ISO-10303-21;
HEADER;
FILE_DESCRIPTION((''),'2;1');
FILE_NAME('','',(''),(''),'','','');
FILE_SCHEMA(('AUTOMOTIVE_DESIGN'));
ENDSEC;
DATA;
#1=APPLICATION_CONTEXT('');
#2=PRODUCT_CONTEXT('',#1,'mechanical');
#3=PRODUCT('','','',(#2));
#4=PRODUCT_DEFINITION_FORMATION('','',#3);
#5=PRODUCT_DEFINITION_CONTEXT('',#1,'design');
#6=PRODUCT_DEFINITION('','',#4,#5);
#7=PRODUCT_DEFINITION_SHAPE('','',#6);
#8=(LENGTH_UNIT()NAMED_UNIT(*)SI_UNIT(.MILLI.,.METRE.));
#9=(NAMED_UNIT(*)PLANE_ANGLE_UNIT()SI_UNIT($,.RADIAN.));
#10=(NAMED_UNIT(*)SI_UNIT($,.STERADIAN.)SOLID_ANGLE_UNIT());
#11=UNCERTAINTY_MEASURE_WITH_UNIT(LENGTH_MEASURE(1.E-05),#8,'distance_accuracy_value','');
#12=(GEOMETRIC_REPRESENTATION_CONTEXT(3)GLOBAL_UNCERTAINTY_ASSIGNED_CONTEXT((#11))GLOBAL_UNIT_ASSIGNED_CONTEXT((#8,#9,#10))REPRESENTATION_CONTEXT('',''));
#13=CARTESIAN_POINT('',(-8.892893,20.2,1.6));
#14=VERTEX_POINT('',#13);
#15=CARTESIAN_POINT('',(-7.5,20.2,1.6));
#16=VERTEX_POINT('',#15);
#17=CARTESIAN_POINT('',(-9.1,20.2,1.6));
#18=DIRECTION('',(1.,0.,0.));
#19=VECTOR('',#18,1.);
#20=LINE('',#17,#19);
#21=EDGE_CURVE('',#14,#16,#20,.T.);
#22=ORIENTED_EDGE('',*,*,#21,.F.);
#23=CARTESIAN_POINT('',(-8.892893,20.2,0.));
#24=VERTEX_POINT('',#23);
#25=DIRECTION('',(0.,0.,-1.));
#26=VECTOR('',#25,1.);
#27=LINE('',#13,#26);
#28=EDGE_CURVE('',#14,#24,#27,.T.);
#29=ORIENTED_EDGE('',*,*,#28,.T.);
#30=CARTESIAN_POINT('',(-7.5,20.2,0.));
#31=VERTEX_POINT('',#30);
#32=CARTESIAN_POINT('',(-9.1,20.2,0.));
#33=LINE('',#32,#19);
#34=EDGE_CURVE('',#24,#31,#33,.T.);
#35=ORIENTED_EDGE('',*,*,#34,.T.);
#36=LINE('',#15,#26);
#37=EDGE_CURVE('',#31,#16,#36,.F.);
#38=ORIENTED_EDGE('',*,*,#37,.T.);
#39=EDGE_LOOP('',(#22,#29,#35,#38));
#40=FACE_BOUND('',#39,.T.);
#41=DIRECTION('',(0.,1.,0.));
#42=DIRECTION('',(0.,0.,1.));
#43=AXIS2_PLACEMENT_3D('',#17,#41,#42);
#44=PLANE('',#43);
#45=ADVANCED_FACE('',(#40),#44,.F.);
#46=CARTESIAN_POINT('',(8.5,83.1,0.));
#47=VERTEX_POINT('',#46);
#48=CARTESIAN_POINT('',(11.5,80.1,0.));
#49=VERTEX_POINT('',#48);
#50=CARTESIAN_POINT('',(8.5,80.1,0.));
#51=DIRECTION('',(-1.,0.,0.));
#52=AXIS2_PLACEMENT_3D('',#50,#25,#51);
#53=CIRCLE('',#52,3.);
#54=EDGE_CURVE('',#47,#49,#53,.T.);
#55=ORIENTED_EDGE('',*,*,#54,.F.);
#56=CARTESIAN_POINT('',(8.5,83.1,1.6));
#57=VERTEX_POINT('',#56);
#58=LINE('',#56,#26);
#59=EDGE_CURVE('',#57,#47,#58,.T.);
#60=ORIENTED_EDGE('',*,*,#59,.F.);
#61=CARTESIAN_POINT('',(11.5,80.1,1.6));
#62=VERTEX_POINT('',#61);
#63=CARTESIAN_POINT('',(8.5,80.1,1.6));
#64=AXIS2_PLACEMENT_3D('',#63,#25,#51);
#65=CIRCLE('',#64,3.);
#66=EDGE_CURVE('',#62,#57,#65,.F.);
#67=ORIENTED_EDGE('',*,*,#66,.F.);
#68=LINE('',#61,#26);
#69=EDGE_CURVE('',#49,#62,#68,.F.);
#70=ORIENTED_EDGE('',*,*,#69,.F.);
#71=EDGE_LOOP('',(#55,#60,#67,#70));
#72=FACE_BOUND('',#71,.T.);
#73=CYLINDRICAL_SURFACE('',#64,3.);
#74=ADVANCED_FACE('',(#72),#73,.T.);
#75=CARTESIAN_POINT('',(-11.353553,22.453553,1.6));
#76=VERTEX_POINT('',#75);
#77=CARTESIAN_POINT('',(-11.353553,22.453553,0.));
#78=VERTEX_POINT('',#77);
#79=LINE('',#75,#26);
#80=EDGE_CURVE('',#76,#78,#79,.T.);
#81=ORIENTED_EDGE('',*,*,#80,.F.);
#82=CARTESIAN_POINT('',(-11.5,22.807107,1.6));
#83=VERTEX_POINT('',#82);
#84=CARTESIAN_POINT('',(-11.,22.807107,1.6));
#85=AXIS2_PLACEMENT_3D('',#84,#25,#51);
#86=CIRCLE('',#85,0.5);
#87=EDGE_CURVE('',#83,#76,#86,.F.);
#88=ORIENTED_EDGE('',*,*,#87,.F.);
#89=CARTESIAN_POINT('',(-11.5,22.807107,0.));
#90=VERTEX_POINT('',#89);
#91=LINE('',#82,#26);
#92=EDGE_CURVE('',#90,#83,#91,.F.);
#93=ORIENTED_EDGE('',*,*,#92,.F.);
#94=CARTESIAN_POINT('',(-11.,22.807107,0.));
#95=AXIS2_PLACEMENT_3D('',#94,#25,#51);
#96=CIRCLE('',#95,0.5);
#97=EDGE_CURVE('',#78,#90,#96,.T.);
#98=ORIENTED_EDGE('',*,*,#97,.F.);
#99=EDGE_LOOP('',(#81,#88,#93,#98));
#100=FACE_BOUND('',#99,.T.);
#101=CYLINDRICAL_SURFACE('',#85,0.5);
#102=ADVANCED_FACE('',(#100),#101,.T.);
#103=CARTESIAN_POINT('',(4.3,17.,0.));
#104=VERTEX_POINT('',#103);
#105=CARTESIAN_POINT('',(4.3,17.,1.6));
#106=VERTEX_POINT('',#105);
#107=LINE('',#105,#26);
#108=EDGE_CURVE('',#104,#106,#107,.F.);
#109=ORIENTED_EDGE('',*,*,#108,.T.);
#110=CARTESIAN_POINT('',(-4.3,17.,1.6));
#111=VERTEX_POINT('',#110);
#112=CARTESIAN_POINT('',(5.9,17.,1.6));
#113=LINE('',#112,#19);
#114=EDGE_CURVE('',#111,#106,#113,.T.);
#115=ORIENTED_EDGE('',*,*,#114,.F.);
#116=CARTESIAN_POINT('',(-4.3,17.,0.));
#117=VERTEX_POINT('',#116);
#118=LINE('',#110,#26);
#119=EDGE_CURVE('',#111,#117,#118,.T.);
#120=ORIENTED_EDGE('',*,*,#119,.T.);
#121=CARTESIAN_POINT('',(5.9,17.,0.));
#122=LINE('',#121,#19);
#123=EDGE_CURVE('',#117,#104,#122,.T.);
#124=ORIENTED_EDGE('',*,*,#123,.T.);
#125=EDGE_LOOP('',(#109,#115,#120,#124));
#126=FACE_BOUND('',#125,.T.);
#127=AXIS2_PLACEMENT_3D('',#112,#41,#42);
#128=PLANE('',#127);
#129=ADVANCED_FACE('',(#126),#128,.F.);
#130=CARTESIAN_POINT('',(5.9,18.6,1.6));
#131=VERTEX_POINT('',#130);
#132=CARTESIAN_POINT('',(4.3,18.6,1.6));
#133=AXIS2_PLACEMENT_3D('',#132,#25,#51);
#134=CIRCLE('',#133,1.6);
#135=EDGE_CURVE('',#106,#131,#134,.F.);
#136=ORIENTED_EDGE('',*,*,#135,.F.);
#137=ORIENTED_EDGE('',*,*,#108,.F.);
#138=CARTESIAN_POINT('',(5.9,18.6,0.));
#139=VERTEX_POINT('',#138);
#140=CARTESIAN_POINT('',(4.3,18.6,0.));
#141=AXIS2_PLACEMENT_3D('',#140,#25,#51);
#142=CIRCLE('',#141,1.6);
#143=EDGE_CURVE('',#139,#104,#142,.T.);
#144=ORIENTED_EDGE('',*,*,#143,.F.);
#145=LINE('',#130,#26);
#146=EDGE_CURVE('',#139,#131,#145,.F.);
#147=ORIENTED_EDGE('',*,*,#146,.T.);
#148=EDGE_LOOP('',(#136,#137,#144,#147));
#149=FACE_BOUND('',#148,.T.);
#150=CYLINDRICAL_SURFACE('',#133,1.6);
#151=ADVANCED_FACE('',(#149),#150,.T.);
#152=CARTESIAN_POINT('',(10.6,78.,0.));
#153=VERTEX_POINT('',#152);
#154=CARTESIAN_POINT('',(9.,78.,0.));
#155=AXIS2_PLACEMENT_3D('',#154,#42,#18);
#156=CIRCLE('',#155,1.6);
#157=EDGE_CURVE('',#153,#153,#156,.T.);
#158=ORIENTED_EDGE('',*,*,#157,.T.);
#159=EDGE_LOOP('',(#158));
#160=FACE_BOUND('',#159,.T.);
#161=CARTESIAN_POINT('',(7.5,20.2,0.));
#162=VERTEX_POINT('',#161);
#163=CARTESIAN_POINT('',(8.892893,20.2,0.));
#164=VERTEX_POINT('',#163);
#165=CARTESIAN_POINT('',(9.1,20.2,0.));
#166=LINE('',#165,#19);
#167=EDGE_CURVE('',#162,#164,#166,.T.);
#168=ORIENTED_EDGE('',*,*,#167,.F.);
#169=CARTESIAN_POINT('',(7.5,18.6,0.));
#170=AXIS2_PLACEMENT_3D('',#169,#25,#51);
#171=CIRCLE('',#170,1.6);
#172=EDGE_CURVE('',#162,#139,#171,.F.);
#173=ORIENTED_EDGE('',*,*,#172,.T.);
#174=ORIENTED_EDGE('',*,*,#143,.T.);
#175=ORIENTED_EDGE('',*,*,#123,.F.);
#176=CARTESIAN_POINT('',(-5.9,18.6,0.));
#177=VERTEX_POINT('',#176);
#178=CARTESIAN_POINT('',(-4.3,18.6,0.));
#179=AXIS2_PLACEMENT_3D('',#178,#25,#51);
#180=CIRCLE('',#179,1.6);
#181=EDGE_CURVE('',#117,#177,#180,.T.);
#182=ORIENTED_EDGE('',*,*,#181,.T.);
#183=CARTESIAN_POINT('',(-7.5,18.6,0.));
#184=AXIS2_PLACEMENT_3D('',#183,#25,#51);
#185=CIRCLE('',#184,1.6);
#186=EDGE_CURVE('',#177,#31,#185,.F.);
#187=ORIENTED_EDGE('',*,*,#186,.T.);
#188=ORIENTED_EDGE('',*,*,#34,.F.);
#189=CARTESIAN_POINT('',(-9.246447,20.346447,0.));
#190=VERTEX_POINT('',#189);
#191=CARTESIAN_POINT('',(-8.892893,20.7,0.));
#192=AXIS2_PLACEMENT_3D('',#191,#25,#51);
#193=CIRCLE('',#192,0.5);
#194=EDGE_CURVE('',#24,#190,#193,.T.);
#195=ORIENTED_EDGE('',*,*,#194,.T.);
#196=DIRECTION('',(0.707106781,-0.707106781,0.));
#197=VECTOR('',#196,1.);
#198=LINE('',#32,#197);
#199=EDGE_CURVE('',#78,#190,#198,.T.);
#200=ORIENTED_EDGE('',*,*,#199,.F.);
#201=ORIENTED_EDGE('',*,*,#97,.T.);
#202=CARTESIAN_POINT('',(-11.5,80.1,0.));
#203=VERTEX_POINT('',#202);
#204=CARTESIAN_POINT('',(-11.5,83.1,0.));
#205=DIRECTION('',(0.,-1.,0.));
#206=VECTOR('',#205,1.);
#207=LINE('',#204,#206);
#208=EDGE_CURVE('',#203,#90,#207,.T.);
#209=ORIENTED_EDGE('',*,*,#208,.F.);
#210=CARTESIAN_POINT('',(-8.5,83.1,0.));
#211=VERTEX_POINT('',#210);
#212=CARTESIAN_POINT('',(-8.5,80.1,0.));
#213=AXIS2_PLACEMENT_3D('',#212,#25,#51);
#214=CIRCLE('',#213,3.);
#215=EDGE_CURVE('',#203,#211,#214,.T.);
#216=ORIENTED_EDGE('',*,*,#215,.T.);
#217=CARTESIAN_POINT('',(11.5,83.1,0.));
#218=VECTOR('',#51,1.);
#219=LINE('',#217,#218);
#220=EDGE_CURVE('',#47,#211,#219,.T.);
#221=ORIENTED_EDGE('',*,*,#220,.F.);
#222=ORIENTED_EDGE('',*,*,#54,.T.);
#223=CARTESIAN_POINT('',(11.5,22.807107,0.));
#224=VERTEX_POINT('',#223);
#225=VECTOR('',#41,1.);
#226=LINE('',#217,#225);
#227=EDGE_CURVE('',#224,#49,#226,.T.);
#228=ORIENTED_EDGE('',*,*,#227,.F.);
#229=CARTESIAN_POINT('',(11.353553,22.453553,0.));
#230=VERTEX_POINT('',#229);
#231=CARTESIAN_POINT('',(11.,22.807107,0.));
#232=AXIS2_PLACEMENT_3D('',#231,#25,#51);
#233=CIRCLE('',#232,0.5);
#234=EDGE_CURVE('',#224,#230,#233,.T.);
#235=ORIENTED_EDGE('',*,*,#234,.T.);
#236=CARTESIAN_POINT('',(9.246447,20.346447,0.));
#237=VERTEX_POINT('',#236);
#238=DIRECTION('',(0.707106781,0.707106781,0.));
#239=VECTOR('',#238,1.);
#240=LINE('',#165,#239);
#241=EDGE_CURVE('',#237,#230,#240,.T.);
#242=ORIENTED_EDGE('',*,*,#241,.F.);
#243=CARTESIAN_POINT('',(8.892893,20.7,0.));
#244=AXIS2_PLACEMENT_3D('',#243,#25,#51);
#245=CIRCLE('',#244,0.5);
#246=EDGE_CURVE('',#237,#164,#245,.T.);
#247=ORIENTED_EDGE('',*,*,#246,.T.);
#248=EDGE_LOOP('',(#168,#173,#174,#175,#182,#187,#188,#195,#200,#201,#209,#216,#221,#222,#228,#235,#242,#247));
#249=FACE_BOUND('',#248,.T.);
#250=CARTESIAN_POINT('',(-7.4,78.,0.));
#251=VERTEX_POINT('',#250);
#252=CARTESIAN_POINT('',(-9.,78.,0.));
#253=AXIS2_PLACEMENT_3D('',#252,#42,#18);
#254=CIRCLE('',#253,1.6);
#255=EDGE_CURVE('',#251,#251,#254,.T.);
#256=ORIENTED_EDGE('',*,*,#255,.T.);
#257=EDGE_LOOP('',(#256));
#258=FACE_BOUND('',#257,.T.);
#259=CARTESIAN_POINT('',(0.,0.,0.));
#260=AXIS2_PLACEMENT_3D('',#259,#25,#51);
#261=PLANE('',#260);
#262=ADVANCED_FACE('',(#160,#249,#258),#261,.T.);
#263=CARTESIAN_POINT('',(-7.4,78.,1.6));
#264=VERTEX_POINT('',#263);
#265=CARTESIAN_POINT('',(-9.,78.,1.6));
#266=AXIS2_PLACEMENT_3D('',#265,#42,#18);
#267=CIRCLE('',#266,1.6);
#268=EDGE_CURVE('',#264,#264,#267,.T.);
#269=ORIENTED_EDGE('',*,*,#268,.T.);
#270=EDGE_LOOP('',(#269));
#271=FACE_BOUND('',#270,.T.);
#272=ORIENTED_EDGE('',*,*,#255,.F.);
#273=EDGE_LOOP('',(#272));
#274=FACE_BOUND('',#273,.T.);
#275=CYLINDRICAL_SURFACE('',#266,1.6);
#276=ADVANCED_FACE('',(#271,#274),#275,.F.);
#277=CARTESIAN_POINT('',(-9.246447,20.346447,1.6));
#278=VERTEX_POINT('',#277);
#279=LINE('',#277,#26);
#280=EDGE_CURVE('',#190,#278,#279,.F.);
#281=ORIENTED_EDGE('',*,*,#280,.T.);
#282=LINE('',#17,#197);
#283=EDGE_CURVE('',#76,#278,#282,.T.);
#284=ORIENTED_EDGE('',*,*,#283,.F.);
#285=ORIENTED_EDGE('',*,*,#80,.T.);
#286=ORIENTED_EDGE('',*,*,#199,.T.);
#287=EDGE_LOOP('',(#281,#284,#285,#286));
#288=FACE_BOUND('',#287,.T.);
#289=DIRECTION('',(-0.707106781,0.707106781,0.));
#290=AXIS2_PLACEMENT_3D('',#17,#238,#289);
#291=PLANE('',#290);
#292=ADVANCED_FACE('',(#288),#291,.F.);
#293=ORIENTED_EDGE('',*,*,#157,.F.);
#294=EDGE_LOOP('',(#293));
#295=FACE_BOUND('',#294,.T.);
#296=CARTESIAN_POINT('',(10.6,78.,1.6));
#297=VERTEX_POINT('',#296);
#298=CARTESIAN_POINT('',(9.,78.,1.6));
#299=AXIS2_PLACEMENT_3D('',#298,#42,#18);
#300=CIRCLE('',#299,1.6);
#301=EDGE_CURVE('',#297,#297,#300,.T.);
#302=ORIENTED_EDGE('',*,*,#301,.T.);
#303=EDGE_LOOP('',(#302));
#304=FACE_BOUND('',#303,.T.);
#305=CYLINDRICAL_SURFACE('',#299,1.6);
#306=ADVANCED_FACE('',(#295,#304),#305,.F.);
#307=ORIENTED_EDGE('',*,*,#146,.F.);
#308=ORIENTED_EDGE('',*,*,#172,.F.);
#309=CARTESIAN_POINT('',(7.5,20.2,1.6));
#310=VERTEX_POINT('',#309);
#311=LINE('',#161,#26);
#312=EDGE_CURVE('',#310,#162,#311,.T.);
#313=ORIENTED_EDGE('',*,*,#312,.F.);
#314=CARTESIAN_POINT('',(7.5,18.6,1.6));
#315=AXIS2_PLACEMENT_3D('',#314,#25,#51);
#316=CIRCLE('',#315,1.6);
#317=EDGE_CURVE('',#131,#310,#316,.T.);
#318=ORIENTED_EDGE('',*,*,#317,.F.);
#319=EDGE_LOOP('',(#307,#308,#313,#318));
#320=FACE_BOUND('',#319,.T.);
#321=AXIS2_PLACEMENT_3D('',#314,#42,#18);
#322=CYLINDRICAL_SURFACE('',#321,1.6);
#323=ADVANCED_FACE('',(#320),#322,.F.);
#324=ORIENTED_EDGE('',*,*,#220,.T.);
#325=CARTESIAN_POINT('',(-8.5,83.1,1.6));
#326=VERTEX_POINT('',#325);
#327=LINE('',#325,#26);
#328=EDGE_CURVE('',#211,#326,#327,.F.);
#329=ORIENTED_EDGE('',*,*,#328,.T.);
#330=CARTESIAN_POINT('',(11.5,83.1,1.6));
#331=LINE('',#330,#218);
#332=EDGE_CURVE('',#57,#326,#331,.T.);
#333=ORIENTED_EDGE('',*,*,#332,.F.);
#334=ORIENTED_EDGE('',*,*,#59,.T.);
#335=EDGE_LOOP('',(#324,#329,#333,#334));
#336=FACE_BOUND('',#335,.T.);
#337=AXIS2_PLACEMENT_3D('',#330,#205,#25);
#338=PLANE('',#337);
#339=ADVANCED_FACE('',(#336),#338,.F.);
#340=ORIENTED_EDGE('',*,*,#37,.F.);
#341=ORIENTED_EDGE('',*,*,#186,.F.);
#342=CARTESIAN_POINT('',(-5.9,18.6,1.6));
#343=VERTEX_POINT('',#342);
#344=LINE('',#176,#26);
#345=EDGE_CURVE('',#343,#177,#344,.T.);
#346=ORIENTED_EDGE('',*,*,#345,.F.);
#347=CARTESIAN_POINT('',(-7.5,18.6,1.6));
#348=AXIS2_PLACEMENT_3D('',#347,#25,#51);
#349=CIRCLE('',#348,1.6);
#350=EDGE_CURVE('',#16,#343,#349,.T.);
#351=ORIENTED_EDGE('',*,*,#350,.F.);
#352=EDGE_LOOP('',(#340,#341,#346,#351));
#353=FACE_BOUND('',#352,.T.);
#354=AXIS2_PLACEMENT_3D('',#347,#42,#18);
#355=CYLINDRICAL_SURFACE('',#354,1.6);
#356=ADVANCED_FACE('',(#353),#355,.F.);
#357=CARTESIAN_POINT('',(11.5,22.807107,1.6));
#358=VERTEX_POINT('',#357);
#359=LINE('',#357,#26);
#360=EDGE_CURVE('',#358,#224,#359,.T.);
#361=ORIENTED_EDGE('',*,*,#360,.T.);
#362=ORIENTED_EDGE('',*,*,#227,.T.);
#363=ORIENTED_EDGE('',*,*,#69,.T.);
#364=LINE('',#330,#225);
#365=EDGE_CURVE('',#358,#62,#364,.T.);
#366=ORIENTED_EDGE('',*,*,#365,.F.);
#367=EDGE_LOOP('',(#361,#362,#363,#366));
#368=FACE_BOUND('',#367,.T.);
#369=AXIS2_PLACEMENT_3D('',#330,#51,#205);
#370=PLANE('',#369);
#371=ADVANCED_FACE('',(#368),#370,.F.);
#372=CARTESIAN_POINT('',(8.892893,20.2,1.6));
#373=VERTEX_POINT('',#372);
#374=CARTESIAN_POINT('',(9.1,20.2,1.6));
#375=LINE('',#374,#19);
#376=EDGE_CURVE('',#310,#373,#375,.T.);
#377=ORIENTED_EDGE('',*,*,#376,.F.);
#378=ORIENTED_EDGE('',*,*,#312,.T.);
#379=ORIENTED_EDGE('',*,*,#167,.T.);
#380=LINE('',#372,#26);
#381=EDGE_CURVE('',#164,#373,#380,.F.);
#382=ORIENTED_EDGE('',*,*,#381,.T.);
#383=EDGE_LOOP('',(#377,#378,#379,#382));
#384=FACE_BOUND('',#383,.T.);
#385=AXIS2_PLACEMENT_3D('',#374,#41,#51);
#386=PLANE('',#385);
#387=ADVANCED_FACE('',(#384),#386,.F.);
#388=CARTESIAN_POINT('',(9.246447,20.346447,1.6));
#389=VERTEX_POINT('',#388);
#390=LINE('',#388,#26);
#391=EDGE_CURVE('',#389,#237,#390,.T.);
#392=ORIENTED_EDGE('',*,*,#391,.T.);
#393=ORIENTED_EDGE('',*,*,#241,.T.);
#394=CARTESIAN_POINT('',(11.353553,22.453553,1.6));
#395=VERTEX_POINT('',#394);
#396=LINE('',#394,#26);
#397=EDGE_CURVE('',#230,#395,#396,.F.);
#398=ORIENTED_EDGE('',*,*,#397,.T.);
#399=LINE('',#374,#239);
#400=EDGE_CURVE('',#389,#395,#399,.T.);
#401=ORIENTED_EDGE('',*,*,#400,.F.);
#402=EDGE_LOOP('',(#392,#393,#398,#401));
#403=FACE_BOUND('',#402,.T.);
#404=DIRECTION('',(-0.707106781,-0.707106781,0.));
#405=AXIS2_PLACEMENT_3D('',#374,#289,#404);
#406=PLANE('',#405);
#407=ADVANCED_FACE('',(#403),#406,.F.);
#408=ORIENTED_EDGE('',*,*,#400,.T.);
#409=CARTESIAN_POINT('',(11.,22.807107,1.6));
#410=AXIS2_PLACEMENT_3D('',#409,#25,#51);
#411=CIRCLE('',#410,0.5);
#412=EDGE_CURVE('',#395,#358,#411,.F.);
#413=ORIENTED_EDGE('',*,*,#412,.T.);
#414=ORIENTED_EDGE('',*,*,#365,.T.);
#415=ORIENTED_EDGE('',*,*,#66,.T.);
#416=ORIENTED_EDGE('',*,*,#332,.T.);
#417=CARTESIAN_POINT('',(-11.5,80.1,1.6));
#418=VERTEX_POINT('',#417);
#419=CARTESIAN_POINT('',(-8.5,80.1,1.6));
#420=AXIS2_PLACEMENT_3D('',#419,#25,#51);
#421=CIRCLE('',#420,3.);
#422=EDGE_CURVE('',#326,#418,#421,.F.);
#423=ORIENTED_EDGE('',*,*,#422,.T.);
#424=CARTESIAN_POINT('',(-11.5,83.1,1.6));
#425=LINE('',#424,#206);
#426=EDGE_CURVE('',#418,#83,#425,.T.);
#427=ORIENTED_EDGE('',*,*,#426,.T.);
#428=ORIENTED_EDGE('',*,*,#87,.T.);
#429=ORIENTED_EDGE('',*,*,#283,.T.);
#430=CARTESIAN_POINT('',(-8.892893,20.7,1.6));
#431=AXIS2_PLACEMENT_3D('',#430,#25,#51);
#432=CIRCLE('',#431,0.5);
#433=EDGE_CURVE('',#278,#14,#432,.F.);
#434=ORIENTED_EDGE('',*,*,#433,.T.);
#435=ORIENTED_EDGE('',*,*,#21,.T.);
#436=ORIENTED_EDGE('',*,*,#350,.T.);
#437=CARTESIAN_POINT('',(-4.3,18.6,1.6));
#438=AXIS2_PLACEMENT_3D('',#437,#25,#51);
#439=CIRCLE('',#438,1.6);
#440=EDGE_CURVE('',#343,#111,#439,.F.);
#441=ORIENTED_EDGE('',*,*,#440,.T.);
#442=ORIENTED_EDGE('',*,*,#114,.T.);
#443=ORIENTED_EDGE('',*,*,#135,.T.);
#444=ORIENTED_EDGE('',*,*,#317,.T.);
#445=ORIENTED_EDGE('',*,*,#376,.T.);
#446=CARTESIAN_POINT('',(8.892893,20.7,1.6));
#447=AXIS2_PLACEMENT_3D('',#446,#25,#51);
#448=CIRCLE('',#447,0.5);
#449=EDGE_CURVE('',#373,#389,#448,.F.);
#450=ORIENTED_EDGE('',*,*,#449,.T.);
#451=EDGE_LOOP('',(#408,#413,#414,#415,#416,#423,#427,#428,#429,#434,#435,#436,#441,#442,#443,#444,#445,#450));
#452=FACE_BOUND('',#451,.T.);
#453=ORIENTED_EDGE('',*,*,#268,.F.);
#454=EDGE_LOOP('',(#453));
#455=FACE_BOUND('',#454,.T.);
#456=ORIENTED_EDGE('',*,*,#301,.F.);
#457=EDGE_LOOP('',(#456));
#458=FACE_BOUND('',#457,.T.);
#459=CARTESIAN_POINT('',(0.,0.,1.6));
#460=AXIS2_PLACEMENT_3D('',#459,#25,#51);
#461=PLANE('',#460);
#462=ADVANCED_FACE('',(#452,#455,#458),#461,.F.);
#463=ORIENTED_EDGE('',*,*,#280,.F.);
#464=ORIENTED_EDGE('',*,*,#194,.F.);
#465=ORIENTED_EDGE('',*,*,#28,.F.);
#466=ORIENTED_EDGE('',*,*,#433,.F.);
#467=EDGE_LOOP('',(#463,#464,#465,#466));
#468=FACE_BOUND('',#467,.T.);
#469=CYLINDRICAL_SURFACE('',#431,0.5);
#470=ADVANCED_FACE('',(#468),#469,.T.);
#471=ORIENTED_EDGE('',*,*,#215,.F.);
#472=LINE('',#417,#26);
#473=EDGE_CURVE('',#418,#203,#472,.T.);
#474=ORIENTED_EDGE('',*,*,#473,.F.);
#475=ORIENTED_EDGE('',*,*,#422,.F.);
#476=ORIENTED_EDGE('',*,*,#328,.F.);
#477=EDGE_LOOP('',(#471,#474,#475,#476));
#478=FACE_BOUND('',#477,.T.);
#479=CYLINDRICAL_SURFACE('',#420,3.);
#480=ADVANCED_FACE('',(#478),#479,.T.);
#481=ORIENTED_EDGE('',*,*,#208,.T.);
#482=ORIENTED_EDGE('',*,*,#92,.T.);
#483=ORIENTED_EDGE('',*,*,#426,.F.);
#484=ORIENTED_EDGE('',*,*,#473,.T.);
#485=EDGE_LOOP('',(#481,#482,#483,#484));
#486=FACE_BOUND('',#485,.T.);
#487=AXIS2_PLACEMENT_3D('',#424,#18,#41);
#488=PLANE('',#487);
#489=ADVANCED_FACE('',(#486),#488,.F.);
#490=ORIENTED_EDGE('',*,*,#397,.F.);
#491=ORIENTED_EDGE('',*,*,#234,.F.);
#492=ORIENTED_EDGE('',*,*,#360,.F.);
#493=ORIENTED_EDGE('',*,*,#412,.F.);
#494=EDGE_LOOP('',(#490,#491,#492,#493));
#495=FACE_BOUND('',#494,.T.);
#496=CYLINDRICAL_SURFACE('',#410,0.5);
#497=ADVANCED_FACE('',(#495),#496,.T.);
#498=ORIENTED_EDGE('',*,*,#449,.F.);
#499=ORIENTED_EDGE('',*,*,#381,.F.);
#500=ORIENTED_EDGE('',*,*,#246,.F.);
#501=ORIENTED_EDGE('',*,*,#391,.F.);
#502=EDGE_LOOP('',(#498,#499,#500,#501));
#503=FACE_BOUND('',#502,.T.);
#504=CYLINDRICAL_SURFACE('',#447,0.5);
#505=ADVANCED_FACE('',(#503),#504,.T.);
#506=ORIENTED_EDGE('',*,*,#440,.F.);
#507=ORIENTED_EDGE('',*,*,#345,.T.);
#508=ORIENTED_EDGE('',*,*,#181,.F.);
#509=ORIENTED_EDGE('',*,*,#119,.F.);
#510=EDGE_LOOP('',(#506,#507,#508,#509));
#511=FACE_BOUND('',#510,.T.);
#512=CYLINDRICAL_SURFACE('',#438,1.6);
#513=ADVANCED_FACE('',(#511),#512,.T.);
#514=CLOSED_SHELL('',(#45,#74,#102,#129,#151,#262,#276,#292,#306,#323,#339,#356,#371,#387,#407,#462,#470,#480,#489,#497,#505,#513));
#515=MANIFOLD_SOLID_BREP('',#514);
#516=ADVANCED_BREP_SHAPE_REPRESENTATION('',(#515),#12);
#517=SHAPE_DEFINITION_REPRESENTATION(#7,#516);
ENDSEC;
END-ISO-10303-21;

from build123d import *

# Parameters (mm, degrees)
BOSS_EXTRUDE1_DEPTH  = 1.6
FILLET1_R            = 3
FILLET2_START        = -1
FILLET2_DEPTH        = 4
FILLET2_2_DEPTH      = 1.6
FILLET3_R            = 0.5
M3_CLEARANCE_HOLE1_D = 3.2


with BuildPart() as part:
    # Sketch1 → Boss-Extrude1 (new body)
    with BuildSketch(Plane.XY):
        Polygon((11.5, 83.1), (-11.5, 83.1), (-11.5, 22.6), (-9.1, 20.2), (-5.9, 20.2), (-5.9, 17), (5.9, 17), (5.9, 20.2), (9.1, 20.2), (11.5, 22.6), align=None)
    extrude(amount=BOSS_EXTRUDE1_DEPTH)

    # Fillet1
    fillet1_edges = [part.edges().sort_by_distance(p)[0] for p in [
        (-11.5, 83.1, 0.8),
        (11.5, 83.1, 0.8),
    ]]
    fillet(fillet1_edges, radius=FILLET1_R)

    # Fillet2: read off the stored shape, not the designer's step
    # Fillet2 outline → Fillet2 (cut)
    with BuildSketch(Plane.XY.offset(FILLET2_START)):
        with BuildLine():
            ThreePointArc((5.9, 18.6), (5.43137085, 17.46862915), (4.3, 17))
            Line((4.3, 17), (5.9, 17))
            Line((5.9, 17), (5.9, 18.6))
        make_face()
        with BuildLine():
            ThreePointArc((-4.3, 17), (-5.43137085, 17.46862915), (-5.9, 18.6))
            Line((-5.9, 18.6), (-5.9, 17))
            Line((-5.9, 17), (-4.3, 17))
        make_face()
    extrude(amount=FILLET2_DEPTH, mode=Mode.SUBTRACT)

    # Fillet2 2 outline → Fillet2 2 (add)
    with BuildSketch(Plane.XY):
        with BuildLine():
            Line((5.9, 20.2), (5.9, 18.6))
            ThreePointArc((5.9, 18.6), (6.36862915, 19.73137085), (7.5, 20.2))
            Line((7.5, 20.2), (5.9, 20.2))
        make_face()
        with BuildLine():
            ThreePointArc((-7.5, 20.2), (-6.36862915, 19.73137085), (-5.9, 18.6))
            Line((-5.9, 18.6), (-5.9, 20.2))
            Line((-5.9, 20.2), (-7.5, 20.2))
        make_face()
    extrude(amount=FILLET2_2_DEPTH)

    # Fillet3
    fillet3_edges = [part.edges().sort_by_distance(p)[0] for p in [
        (-11.5, 22.6, 0.8),
        (11.5, 22.6, 0.8),
        (9.1, 20.2, 0.8),
        (-9.1, 20.2, 0.8),
    ]]
    fillet(fillet3_edges, radius=FILLET3_R)

    # M3 Clearance Hole1 (through all)
    with Locations(Plane.XY.offset(1.6)):
        with Locations((-9, 78), (9, 78)):
            Hole(M3_CLEARANCE_HOLE1_D / 2)


solid = part.part
